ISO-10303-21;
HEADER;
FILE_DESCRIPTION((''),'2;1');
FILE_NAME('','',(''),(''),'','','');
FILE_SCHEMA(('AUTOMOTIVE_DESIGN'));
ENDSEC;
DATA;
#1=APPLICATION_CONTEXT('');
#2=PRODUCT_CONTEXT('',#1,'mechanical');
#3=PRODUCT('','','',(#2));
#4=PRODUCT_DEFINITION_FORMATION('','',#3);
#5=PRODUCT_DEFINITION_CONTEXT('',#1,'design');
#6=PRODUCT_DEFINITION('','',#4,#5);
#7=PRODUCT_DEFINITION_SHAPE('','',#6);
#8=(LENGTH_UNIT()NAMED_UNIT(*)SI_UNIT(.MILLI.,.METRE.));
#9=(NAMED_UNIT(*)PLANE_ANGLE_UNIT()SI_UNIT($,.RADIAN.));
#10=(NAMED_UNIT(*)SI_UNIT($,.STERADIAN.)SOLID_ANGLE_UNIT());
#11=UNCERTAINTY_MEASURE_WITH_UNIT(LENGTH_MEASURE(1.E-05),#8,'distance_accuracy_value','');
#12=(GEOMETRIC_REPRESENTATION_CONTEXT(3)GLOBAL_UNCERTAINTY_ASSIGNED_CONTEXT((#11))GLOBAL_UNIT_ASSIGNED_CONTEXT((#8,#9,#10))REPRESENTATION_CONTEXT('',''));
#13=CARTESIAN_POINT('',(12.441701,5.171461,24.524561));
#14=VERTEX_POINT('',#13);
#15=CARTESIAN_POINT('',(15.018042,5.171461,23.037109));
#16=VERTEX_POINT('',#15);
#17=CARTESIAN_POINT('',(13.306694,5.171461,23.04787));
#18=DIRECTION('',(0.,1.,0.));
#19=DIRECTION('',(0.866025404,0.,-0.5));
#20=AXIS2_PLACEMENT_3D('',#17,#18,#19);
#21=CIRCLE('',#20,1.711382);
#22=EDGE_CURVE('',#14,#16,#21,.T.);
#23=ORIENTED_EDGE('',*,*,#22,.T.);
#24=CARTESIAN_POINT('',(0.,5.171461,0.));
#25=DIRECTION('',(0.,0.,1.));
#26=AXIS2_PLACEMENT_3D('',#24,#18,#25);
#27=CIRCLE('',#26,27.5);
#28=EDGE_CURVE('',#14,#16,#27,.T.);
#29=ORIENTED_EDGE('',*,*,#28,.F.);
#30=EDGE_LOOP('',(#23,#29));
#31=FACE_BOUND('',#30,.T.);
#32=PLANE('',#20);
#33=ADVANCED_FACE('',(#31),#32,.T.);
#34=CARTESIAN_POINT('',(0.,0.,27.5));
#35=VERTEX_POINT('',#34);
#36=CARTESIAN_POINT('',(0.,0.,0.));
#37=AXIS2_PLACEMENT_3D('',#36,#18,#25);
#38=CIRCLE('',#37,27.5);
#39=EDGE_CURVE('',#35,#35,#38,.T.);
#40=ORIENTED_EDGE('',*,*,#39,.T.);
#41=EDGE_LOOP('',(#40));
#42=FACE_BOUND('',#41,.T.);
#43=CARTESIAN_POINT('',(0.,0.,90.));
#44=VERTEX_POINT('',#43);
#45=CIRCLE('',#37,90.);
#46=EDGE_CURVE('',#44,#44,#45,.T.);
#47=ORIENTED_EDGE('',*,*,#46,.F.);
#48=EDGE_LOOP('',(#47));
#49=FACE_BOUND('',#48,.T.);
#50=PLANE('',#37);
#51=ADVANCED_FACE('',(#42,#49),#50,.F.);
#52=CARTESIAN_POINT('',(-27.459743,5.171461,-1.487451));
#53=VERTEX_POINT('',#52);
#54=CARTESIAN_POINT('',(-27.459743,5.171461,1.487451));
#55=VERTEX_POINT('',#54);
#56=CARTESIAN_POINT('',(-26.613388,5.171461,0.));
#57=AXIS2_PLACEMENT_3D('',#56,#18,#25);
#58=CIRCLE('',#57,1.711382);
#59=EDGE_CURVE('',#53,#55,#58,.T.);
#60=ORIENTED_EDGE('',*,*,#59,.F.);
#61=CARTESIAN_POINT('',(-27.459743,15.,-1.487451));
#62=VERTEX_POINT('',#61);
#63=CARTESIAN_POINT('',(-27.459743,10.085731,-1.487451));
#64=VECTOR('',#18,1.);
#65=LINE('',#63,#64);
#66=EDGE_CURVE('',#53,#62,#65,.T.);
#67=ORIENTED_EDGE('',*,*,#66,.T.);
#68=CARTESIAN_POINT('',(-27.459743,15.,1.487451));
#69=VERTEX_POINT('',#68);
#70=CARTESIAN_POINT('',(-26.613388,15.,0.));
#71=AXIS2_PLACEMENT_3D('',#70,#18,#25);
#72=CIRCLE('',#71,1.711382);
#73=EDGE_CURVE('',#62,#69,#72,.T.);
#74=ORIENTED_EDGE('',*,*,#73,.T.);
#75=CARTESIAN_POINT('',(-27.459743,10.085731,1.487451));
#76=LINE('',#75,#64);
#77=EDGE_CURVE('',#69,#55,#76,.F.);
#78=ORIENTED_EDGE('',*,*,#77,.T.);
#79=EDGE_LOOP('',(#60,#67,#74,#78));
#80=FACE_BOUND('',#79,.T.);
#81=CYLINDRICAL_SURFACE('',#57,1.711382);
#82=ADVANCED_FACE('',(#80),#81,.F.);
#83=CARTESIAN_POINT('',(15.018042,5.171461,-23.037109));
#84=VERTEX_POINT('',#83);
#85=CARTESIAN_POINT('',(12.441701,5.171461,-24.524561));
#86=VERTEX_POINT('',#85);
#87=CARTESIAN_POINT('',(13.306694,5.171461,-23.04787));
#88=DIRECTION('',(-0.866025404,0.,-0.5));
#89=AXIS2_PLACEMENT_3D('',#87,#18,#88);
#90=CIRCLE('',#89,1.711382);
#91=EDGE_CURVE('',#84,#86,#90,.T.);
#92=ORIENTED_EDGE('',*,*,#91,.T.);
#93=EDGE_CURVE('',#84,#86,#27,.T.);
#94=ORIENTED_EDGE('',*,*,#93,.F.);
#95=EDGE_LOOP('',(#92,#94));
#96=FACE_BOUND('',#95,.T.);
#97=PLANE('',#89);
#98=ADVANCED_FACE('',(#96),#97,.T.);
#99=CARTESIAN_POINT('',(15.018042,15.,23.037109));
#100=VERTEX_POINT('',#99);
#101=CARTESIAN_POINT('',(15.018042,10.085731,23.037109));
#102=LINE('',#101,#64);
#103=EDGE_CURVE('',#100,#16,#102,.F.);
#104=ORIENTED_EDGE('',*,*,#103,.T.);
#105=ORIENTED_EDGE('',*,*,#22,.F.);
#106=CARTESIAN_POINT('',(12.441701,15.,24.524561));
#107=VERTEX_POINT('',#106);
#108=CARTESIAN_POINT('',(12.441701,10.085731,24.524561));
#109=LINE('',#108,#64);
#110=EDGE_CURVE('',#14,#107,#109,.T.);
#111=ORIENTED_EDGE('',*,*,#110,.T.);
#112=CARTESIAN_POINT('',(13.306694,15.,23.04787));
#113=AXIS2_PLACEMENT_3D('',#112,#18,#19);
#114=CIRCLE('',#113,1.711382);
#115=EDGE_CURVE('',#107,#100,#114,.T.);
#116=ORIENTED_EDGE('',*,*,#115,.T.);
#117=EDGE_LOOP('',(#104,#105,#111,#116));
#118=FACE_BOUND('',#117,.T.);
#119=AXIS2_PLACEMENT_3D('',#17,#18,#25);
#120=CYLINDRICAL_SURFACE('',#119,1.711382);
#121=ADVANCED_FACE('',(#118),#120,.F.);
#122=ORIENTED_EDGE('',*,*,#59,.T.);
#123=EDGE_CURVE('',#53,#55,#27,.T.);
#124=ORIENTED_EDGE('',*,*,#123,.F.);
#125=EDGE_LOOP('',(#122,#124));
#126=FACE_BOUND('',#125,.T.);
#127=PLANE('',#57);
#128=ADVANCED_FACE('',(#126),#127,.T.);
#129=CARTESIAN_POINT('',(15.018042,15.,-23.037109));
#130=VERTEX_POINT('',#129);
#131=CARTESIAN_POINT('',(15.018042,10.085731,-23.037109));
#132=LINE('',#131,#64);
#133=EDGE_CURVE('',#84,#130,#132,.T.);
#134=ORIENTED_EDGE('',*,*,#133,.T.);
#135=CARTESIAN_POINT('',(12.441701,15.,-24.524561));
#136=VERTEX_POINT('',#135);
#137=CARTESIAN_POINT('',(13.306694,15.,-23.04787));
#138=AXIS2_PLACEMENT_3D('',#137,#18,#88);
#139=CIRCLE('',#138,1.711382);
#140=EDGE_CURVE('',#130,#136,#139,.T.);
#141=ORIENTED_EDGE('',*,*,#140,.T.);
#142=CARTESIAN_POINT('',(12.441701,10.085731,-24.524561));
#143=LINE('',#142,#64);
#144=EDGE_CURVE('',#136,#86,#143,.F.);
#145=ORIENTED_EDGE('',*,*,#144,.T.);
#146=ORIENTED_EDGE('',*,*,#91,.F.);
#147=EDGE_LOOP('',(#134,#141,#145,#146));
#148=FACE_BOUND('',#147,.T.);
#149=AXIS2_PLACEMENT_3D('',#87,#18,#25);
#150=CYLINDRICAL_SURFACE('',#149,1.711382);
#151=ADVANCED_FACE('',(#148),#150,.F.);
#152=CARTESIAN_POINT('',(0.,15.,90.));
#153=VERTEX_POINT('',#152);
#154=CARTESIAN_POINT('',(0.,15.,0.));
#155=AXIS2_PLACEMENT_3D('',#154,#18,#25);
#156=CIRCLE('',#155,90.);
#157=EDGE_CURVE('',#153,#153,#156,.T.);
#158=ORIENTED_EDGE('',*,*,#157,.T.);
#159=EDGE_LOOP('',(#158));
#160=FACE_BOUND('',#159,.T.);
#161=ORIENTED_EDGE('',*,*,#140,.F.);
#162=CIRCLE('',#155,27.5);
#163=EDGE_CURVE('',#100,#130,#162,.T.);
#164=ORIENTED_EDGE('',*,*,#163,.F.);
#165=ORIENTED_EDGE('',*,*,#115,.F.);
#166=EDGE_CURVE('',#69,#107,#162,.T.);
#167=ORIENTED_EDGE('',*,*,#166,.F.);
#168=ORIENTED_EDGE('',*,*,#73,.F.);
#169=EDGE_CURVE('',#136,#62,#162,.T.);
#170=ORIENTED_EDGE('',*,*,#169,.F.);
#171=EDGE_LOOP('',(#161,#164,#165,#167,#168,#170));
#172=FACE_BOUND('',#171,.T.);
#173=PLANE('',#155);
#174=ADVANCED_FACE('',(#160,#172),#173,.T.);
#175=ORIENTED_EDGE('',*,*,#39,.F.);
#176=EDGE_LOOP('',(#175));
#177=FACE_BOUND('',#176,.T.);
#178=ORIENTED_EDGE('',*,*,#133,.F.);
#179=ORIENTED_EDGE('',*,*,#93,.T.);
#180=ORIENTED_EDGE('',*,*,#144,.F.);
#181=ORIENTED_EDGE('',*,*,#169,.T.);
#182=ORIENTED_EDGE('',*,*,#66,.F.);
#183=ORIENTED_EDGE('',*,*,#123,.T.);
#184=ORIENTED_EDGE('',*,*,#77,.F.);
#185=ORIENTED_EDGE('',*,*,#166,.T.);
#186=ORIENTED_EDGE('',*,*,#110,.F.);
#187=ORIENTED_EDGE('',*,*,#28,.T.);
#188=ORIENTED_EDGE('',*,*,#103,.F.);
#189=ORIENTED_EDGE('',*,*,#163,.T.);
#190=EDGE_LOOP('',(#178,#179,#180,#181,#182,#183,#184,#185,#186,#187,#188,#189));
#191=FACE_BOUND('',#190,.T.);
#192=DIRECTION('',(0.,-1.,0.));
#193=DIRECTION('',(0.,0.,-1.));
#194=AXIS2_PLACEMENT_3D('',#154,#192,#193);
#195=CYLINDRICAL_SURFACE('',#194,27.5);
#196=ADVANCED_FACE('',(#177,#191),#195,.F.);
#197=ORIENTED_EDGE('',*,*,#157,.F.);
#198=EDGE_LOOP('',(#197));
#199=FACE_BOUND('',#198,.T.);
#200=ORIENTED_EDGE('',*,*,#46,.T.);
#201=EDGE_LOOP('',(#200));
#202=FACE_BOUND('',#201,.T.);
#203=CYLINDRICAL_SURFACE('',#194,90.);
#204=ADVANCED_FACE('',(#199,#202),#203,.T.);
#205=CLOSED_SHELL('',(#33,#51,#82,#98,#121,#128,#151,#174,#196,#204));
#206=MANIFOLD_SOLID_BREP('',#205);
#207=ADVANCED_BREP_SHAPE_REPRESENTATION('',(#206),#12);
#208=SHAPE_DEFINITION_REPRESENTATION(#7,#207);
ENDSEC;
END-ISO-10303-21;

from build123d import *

# Parameters (mm, degrees)
SKETCH1_R           = 90
BOSS_EXTRUDE1_DEPTH = 15
SKETCH2_R           = 27.5
CUT_EXTRUDE1_DEPTH  = 129.16005618
SKETCH3_R           = 1.711382177
CUT_EXTRUDE2_DEPTH  = 9.82853876
CIRPATTERN1_COUNT   = 3


with BuildPart() as part:
    # Sketch1 → Boss-Extrude1 (new body)
    with BuildSketch(Plane(origin=(0, 0, 0), x_dir=(1, 0, 0), z_dir=(0, 1, 0))):
        Circle(SKETCH1_R)
    extrude(amount=BOSS_EXTRUDE1_DEPTH)

    # Sketch2 → Cut-Extrude1 (cut, through all)
    with BuildSketch(Plane(origin=(0, 0, 0), x_dir=(1, 0, 0), z_dir=(0, 1, 0))):
        Circle(SKETCH2_R)
    extrude(amount=CUT_EXTRUDE1_DEPTH, mode=Mode.SUBTRACT)

    # Sketch3 → Cut-Extrude2 (cut)
    with BuildSketch(Plane(origin=(0, 15, 0), x_dir=(1, 0, 0), z_dir=(0, 1, 0))):
        with Locations((-26.613387822, 0)):
            Circle(SKETCH3_R)
    cut_extrude2 = extrude(amount=-CUT_EXTRUDE2_DEPTH, mode=Mode.SUBTRACT)

    # CirPattern1: Cut-Extrude2 ×3 about axis
    cirpattern1_axis = Axis((0, 0, 0), (0, 1, 0))
    for i in range(1, CIRPATTERN1_COUNT):
        add(cut_extrude2.rotate(cirpattern1_axis, i * 360 / CIRPATTERN1_COUNT), mode=Mode.SUBTRACT)


solid = part.part
